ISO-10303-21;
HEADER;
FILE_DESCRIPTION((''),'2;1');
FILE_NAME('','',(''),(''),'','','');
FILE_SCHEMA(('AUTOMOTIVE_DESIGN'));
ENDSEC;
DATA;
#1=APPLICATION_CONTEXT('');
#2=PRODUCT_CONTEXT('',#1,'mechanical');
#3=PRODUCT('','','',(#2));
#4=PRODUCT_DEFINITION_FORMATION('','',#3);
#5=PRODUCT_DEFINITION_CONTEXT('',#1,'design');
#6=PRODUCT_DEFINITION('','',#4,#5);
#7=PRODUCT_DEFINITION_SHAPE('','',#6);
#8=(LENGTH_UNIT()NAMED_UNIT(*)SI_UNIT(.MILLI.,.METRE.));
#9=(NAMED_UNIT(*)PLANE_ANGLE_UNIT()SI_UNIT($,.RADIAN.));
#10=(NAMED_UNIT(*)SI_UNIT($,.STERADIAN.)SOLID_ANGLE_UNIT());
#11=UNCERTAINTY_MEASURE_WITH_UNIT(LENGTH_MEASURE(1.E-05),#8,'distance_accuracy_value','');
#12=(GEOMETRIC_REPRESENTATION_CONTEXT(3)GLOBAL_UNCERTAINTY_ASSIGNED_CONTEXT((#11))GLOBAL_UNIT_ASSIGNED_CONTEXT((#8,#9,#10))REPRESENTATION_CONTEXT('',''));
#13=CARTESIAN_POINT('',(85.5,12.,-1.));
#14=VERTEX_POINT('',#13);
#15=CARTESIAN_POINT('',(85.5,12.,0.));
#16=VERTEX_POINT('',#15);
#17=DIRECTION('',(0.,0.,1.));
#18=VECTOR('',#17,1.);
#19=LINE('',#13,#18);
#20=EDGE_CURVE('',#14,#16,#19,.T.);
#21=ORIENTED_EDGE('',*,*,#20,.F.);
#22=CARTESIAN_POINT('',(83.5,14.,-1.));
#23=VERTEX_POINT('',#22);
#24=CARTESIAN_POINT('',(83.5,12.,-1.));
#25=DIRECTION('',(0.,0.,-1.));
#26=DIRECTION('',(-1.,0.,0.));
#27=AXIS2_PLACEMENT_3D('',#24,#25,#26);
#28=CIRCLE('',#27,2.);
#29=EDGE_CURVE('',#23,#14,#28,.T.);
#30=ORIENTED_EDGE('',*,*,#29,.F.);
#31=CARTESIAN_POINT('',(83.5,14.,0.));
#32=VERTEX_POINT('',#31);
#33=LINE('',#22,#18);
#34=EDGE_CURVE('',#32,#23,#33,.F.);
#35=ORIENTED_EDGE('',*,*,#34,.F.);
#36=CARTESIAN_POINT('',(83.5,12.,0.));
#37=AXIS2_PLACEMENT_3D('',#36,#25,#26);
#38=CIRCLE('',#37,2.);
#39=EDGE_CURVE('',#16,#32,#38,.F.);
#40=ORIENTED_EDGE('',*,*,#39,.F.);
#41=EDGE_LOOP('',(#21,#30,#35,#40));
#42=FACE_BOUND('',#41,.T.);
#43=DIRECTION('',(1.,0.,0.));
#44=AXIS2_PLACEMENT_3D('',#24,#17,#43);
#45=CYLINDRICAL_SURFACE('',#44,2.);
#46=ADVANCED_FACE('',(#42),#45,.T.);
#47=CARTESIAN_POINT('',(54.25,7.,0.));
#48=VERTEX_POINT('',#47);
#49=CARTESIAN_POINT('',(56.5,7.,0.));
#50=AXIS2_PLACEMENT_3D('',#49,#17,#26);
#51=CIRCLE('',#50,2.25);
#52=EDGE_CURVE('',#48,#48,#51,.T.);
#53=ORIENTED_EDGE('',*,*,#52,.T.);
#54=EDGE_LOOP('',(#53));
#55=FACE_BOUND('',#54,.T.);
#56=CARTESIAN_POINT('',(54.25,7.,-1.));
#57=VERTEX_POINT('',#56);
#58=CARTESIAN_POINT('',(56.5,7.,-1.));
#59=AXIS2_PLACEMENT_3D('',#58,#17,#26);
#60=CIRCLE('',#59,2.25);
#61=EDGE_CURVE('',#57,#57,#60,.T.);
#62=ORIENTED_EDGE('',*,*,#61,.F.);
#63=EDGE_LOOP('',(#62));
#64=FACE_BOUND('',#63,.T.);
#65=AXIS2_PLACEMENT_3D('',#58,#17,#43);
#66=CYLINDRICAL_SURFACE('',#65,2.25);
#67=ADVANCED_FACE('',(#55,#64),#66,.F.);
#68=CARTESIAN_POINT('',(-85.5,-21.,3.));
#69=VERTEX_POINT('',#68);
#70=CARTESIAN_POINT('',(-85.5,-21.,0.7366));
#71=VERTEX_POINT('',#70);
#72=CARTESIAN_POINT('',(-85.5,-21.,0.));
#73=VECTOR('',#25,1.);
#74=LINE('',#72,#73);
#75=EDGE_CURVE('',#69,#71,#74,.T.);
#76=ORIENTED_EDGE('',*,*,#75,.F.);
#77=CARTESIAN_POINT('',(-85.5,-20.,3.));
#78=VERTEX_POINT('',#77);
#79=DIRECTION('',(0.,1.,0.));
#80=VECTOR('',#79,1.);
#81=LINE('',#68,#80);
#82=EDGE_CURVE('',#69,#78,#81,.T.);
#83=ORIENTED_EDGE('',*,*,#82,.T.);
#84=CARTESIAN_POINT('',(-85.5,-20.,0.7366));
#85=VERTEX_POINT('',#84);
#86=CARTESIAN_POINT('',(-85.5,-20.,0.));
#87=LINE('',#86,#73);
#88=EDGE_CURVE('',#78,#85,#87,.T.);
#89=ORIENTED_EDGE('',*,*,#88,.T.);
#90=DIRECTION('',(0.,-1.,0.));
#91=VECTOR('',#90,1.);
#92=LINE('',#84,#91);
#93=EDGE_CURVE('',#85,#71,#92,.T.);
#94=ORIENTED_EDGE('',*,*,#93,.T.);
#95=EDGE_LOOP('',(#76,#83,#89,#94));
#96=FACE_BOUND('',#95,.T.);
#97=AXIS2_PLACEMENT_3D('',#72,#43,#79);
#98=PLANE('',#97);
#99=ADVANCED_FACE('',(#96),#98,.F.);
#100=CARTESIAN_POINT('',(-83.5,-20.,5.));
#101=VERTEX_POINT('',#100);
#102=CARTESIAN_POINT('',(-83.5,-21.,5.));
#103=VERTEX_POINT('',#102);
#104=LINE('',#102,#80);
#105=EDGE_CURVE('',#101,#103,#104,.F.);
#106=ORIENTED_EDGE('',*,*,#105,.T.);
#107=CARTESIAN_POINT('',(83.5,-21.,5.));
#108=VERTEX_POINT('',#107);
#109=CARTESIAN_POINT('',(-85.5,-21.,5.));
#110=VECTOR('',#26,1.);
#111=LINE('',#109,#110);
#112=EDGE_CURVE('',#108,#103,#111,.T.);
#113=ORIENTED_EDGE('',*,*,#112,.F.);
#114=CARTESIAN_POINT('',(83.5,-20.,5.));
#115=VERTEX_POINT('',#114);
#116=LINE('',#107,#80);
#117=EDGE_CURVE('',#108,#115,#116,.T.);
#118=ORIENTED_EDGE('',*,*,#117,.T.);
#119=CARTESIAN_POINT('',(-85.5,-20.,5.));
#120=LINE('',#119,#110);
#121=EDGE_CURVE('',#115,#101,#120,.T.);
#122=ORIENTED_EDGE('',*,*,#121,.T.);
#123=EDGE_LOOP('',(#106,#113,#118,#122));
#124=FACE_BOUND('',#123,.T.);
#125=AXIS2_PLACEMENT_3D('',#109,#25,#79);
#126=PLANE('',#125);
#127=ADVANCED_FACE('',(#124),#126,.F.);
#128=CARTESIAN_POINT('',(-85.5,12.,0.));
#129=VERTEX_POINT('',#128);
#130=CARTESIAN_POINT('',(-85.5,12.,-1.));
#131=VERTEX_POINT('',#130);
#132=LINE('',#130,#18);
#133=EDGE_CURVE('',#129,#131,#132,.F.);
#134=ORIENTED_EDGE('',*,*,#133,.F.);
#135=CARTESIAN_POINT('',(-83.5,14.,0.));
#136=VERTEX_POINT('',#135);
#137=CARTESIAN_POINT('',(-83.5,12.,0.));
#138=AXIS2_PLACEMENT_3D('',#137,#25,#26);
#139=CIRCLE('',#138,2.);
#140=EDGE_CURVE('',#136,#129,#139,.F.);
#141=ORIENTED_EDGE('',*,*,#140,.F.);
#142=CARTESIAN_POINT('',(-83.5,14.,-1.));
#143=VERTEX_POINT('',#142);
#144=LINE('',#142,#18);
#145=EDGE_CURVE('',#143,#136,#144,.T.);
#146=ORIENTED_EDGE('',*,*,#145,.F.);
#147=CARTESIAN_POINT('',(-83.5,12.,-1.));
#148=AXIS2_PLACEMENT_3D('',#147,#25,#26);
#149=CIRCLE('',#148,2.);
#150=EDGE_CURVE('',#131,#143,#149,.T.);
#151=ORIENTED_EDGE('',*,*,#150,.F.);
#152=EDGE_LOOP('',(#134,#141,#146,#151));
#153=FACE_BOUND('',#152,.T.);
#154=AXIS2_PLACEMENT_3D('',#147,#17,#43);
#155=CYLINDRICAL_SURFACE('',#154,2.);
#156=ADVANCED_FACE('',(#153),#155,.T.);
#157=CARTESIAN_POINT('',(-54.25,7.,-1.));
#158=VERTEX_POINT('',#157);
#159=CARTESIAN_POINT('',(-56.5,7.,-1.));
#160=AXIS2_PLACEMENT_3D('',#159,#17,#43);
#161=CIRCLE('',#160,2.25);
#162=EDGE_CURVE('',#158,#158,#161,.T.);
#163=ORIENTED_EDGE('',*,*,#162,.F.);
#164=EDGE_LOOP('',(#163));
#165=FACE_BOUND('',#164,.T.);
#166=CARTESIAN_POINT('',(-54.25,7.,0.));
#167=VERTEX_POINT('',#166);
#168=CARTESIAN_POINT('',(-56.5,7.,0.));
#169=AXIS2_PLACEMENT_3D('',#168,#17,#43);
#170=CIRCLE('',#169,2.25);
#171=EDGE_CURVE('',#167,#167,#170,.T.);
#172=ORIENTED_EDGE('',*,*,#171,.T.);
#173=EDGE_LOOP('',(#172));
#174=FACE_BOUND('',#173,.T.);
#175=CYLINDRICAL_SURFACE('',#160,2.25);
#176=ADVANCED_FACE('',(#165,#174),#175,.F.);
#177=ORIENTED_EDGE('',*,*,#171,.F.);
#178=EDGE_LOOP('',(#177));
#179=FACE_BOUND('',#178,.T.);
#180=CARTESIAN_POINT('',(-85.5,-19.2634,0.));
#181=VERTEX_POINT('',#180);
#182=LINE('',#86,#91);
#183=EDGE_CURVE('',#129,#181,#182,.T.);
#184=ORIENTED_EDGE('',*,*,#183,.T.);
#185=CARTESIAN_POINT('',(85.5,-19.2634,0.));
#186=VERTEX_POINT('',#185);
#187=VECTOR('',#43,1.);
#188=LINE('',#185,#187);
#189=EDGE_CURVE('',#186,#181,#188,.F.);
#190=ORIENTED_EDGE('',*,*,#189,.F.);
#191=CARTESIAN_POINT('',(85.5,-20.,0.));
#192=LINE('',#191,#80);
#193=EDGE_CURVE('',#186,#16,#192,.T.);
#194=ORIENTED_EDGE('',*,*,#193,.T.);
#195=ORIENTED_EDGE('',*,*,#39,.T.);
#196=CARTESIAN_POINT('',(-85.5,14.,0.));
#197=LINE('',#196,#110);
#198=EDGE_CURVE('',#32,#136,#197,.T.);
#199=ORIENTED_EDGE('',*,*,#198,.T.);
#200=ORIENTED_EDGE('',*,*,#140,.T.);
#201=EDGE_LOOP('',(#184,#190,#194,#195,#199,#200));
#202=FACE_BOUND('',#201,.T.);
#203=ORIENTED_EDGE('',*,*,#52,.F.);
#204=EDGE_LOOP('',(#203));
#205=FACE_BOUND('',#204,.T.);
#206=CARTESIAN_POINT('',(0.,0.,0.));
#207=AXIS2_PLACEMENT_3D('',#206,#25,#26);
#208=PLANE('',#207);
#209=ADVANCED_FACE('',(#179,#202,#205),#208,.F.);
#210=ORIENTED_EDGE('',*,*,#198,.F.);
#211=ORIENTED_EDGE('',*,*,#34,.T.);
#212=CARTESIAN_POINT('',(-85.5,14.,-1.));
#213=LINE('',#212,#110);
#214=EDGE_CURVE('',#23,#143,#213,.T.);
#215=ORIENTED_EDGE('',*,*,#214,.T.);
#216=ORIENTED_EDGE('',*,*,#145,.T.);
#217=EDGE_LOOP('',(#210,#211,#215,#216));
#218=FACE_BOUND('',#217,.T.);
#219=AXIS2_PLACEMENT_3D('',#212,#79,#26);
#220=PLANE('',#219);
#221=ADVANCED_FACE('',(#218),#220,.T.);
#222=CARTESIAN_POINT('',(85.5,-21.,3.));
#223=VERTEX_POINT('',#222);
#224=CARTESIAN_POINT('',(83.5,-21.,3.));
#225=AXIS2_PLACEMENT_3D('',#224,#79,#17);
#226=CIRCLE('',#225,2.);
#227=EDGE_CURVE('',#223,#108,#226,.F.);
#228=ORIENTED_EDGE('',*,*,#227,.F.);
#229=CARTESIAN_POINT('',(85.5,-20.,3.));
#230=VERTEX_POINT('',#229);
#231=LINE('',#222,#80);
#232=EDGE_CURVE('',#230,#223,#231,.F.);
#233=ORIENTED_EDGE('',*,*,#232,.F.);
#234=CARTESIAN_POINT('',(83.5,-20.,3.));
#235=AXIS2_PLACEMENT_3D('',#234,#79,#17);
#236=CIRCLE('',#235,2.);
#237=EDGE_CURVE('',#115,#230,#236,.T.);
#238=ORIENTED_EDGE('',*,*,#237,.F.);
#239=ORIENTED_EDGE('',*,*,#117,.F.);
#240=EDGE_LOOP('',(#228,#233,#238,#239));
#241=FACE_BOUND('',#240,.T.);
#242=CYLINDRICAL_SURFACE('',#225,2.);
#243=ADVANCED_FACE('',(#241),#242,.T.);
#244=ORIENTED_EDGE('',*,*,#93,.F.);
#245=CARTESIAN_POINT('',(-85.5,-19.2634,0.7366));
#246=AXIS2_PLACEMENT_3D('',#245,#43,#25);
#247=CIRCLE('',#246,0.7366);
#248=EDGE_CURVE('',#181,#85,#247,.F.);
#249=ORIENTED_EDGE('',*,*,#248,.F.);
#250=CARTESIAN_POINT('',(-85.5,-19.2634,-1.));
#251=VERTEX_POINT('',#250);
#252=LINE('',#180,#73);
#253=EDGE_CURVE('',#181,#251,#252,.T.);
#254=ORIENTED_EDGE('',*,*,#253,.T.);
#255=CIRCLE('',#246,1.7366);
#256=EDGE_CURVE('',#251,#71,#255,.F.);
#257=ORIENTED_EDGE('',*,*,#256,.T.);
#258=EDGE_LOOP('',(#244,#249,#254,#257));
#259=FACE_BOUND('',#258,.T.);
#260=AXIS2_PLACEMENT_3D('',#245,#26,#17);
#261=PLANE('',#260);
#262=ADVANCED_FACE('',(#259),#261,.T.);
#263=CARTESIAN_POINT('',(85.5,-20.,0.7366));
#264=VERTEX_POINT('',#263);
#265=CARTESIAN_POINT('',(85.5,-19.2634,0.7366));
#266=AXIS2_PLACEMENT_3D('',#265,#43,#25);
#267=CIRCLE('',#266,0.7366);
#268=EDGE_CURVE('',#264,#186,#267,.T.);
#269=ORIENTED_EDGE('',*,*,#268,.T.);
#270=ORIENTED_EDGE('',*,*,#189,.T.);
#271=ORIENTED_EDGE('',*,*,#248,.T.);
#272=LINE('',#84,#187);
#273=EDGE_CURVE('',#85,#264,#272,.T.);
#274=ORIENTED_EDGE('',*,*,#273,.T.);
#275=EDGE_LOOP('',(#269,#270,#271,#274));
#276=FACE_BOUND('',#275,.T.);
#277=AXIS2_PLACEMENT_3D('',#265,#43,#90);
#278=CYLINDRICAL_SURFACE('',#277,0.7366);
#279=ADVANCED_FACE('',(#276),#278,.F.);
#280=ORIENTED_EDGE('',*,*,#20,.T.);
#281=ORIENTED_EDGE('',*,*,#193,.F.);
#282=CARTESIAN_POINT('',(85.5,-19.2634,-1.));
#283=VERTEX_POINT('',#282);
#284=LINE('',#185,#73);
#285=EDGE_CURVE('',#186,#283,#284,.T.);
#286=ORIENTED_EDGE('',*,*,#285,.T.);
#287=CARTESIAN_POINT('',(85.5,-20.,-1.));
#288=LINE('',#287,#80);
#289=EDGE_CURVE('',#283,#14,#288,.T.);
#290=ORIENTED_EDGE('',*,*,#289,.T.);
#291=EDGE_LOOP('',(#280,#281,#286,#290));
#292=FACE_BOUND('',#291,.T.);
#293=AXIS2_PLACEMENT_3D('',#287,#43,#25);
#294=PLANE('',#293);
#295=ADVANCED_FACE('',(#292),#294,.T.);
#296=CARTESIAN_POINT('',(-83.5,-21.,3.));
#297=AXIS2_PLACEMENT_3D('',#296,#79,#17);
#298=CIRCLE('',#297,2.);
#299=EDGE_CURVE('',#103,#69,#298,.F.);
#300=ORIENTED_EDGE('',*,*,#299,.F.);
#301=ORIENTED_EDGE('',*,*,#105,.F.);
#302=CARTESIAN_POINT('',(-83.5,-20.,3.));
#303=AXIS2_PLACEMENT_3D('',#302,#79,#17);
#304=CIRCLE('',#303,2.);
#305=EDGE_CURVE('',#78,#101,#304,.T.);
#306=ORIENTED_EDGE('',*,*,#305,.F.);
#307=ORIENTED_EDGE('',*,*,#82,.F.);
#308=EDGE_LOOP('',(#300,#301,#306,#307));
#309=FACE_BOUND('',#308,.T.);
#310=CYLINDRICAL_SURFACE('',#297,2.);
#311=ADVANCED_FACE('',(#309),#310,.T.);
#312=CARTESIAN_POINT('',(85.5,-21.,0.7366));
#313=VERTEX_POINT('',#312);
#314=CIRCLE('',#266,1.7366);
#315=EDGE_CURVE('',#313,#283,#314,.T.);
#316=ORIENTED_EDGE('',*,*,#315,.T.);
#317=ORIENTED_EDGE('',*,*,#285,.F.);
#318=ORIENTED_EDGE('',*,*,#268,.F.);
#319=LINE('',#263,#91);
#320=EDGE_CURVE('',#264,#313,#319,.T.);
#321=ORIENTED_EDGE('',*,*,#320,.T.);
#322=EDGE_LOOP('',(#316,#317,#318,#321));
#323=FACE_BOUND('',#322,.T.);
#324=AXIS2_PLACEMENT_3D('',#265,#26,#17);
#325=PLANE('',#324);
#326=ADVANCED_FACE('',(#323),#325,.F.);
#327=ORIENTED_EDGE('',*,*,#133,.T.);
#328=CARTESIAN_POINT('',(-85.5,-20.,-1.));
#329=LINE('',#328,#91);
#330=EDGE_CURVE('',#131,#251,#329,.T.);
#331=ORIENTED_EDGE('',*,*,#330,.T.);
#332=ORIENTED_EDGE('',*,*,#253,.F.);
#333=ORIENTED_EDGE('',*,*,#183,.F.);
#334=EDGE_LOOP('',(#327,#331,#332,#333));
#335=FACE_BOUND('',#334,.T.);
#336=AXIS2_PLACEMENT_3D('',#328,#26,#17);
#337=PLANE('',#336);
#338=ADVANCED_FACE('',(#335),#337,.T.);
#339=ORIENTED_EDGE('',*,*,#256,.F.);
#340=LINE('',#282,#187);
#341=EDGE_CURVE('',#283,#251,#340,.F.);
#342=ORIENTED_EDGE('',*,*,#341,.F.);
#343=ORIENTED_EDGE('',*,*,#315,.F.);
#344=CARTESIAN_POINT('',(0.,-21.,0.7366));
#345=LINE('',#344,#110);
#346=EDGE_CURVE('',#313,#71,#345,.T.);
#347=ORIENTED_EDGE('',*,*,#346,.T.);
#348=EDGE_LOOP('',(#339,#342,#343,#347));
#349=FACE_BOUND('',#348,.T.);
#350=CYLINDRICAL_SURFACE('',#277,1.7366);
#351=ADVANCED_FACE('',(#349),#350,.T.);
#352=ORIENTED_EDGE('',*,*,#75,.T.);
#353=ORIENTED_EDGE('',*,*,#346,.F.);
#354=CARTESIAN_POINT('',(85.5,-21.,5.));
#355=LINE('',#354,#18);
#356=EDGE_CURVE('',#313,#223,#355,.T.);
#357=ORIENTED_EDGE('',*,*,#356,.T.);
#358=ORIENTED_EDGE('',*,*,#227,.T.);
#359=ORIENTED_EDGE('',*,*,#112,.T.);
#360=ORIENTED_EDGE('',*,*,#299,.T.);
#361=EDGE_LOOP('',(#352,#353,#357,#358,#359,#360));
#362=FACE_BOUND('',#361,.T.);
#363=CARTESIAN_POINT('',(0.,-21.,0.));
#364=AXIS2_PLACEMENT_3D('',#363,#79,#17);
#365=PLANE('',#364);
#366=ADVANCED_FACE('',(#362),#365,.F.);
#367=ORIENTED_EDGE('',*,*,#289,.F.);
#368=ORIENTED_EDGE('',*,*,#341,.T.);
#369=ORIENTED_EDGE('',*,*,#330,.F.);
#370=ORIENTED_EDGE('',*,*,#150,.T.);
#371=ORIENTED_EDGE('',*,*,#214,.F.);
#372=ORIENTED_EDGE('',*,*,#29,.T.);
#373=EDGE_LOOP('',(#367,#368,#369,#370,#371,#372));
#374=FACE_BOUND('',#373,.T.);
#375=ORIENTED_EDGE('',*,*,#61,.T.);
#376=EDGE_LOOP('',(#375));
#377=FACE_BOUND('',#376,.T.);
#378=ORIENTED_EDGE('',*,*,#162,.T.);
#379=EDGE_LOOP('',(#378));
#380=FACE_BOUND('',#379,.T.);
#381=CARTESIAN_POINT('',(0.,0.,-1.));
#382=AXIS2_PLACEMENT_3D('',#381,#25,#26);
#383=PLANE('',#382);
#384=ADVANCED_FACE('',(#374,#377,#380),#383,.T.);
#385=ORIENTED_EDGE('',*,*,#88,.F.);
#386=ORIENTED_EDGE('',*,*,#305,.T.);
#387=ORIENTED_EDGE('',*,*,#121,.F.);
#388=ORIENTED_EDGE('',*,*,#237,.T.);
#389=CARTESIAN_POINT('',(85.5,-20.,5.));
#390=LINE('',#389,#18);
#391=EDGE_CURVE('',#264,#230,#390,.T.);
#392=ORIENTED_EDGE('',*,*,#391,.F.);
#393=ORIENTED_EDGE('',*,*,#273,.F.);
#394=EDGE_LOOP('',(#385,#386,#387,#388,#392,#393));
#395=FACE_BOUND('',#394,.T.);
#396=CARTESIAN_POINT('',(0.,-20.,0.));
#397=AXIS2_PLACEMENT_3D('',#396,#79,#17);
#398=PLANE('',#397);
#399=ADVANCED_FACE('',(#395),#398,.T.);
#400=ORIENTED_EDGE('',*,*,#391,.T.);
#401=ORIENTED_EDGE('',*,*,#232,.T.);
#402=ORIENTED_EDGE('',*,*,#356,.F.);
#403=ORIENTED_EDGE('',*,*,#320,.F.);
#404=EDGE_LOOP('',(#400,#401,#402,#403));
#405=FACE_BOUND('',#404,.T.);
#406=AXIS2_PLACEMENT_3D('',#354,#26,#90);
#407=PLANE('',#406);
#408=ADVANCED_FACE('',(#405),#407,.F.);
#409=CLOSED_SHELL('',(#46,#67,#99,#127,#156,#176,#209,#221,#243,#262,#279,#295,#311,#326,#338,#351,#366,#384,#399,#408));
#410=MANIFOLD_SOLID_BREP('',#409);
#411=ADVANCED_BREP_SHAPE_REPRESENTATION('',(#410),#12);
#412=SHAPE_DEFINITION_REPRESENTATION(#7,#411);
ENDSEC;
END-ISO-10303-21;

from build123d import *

# Parameters (mm, degrees)
ESQUISSE1_W                           = 171
ESQUISSE1_H                           = 34
ESQUISSE1_R                           = 2.25
T_LE_DE_BASE_PLI_E1_DEPTH             = 1
T_LE_PLI_E_SUR_AR_TE1_STRIP_W         = 5.4732
T_LE_PLI_E_SUR_AR_TE1_STRIP_H         = 1
T_LE_PLI_E_SUR_AR_TE1_STRIP_CUT_DEPTH = 171
T_LE_PLI_E_SUR_AR_TE1_DEPTH           = 171
CONG_1_R                              = 2


# Sheet-metal steps are written as plain solids
with BuildPart() as part:
    # Esquisse1 → Tôle de base pliée1 (new body)
    with BuildSketch(Plane.XY):
        with Locations((0, -3)):
            Rectangle(ESQUISSE1_W, ESQUISSE1_H)
        with Locations((-56.5, 7)):
            Circle(ESQUISSE1_R, mode=Mode.SUBTRACT)
        with Locations(Location((56.5, 7, 0), (0, 0, 180))):
            Circle(ESQUISSE1_R, mode=Mode.SUBTRACT)
    extrude(amount=-T_LE_DE_BASE_PLI_E1_DEPTH)

    # Tôle pliée sur arête1 strip (across the edge) → Tôle pliée sur arête1 strip cut (cut)
    with BuildSketch(Plane(origin=(-85.5, -20, 0), x_dir=(0, 1, 0), z_dir=(1, 0, 0))):
        with Locations((-2, -0.5)):
            Rectangle(T_LE_PLI_E_SUR_AR_TE1_STRIP_W, T_LE_PLI_E_SUR_AR_TE1_STRIP_H)
    extrude(amount=T_LE_PLI_E_SUR_AR_TE1_STRIP_CUT_DEPTH, mode=Mode.SUBTRACT)

    # Tôle pliée sur arête1 section (across the edge) → Tôle pliée sur arête1 (add)
    with BuildSketch(Plane(origin=(-85.5, -20, 0), x_dir=(0, 1, 0), z_dir=(1, 0, 0))):
        with BuildLine():
            Line((-1, 0.7366), (-1, 5))
            Line((-1, 5), (0, 5))
            Line((0, 5), (0, 0.7366))
            ThreePointArc((0, 0.7366), (0.215745145, 0.215745145), (0.7366, 0))
            Line((0.7366, 0), (0.7366, -1))
            ThreePointArc((0.7366, -1), (-0.491361636, -0.491361636), (-1, 0.7366))
        make_face()
    extrude(amount=T_LE_PLI_E_SUR_AR_TE1_DEPTH)

    # Congé1
    cong_1_edges = [part.edges().sort_by_distance(p)[0] for p in [
        (-85.5, -20.5, 5),
        (85.5, -20.5, 5),
        (-85.5, 14, -0.5),
        (85.5, 14, -0.5),
    ]]
    fillet(cong_1_edges, radius=CONG_1_R)


solid = part.part
